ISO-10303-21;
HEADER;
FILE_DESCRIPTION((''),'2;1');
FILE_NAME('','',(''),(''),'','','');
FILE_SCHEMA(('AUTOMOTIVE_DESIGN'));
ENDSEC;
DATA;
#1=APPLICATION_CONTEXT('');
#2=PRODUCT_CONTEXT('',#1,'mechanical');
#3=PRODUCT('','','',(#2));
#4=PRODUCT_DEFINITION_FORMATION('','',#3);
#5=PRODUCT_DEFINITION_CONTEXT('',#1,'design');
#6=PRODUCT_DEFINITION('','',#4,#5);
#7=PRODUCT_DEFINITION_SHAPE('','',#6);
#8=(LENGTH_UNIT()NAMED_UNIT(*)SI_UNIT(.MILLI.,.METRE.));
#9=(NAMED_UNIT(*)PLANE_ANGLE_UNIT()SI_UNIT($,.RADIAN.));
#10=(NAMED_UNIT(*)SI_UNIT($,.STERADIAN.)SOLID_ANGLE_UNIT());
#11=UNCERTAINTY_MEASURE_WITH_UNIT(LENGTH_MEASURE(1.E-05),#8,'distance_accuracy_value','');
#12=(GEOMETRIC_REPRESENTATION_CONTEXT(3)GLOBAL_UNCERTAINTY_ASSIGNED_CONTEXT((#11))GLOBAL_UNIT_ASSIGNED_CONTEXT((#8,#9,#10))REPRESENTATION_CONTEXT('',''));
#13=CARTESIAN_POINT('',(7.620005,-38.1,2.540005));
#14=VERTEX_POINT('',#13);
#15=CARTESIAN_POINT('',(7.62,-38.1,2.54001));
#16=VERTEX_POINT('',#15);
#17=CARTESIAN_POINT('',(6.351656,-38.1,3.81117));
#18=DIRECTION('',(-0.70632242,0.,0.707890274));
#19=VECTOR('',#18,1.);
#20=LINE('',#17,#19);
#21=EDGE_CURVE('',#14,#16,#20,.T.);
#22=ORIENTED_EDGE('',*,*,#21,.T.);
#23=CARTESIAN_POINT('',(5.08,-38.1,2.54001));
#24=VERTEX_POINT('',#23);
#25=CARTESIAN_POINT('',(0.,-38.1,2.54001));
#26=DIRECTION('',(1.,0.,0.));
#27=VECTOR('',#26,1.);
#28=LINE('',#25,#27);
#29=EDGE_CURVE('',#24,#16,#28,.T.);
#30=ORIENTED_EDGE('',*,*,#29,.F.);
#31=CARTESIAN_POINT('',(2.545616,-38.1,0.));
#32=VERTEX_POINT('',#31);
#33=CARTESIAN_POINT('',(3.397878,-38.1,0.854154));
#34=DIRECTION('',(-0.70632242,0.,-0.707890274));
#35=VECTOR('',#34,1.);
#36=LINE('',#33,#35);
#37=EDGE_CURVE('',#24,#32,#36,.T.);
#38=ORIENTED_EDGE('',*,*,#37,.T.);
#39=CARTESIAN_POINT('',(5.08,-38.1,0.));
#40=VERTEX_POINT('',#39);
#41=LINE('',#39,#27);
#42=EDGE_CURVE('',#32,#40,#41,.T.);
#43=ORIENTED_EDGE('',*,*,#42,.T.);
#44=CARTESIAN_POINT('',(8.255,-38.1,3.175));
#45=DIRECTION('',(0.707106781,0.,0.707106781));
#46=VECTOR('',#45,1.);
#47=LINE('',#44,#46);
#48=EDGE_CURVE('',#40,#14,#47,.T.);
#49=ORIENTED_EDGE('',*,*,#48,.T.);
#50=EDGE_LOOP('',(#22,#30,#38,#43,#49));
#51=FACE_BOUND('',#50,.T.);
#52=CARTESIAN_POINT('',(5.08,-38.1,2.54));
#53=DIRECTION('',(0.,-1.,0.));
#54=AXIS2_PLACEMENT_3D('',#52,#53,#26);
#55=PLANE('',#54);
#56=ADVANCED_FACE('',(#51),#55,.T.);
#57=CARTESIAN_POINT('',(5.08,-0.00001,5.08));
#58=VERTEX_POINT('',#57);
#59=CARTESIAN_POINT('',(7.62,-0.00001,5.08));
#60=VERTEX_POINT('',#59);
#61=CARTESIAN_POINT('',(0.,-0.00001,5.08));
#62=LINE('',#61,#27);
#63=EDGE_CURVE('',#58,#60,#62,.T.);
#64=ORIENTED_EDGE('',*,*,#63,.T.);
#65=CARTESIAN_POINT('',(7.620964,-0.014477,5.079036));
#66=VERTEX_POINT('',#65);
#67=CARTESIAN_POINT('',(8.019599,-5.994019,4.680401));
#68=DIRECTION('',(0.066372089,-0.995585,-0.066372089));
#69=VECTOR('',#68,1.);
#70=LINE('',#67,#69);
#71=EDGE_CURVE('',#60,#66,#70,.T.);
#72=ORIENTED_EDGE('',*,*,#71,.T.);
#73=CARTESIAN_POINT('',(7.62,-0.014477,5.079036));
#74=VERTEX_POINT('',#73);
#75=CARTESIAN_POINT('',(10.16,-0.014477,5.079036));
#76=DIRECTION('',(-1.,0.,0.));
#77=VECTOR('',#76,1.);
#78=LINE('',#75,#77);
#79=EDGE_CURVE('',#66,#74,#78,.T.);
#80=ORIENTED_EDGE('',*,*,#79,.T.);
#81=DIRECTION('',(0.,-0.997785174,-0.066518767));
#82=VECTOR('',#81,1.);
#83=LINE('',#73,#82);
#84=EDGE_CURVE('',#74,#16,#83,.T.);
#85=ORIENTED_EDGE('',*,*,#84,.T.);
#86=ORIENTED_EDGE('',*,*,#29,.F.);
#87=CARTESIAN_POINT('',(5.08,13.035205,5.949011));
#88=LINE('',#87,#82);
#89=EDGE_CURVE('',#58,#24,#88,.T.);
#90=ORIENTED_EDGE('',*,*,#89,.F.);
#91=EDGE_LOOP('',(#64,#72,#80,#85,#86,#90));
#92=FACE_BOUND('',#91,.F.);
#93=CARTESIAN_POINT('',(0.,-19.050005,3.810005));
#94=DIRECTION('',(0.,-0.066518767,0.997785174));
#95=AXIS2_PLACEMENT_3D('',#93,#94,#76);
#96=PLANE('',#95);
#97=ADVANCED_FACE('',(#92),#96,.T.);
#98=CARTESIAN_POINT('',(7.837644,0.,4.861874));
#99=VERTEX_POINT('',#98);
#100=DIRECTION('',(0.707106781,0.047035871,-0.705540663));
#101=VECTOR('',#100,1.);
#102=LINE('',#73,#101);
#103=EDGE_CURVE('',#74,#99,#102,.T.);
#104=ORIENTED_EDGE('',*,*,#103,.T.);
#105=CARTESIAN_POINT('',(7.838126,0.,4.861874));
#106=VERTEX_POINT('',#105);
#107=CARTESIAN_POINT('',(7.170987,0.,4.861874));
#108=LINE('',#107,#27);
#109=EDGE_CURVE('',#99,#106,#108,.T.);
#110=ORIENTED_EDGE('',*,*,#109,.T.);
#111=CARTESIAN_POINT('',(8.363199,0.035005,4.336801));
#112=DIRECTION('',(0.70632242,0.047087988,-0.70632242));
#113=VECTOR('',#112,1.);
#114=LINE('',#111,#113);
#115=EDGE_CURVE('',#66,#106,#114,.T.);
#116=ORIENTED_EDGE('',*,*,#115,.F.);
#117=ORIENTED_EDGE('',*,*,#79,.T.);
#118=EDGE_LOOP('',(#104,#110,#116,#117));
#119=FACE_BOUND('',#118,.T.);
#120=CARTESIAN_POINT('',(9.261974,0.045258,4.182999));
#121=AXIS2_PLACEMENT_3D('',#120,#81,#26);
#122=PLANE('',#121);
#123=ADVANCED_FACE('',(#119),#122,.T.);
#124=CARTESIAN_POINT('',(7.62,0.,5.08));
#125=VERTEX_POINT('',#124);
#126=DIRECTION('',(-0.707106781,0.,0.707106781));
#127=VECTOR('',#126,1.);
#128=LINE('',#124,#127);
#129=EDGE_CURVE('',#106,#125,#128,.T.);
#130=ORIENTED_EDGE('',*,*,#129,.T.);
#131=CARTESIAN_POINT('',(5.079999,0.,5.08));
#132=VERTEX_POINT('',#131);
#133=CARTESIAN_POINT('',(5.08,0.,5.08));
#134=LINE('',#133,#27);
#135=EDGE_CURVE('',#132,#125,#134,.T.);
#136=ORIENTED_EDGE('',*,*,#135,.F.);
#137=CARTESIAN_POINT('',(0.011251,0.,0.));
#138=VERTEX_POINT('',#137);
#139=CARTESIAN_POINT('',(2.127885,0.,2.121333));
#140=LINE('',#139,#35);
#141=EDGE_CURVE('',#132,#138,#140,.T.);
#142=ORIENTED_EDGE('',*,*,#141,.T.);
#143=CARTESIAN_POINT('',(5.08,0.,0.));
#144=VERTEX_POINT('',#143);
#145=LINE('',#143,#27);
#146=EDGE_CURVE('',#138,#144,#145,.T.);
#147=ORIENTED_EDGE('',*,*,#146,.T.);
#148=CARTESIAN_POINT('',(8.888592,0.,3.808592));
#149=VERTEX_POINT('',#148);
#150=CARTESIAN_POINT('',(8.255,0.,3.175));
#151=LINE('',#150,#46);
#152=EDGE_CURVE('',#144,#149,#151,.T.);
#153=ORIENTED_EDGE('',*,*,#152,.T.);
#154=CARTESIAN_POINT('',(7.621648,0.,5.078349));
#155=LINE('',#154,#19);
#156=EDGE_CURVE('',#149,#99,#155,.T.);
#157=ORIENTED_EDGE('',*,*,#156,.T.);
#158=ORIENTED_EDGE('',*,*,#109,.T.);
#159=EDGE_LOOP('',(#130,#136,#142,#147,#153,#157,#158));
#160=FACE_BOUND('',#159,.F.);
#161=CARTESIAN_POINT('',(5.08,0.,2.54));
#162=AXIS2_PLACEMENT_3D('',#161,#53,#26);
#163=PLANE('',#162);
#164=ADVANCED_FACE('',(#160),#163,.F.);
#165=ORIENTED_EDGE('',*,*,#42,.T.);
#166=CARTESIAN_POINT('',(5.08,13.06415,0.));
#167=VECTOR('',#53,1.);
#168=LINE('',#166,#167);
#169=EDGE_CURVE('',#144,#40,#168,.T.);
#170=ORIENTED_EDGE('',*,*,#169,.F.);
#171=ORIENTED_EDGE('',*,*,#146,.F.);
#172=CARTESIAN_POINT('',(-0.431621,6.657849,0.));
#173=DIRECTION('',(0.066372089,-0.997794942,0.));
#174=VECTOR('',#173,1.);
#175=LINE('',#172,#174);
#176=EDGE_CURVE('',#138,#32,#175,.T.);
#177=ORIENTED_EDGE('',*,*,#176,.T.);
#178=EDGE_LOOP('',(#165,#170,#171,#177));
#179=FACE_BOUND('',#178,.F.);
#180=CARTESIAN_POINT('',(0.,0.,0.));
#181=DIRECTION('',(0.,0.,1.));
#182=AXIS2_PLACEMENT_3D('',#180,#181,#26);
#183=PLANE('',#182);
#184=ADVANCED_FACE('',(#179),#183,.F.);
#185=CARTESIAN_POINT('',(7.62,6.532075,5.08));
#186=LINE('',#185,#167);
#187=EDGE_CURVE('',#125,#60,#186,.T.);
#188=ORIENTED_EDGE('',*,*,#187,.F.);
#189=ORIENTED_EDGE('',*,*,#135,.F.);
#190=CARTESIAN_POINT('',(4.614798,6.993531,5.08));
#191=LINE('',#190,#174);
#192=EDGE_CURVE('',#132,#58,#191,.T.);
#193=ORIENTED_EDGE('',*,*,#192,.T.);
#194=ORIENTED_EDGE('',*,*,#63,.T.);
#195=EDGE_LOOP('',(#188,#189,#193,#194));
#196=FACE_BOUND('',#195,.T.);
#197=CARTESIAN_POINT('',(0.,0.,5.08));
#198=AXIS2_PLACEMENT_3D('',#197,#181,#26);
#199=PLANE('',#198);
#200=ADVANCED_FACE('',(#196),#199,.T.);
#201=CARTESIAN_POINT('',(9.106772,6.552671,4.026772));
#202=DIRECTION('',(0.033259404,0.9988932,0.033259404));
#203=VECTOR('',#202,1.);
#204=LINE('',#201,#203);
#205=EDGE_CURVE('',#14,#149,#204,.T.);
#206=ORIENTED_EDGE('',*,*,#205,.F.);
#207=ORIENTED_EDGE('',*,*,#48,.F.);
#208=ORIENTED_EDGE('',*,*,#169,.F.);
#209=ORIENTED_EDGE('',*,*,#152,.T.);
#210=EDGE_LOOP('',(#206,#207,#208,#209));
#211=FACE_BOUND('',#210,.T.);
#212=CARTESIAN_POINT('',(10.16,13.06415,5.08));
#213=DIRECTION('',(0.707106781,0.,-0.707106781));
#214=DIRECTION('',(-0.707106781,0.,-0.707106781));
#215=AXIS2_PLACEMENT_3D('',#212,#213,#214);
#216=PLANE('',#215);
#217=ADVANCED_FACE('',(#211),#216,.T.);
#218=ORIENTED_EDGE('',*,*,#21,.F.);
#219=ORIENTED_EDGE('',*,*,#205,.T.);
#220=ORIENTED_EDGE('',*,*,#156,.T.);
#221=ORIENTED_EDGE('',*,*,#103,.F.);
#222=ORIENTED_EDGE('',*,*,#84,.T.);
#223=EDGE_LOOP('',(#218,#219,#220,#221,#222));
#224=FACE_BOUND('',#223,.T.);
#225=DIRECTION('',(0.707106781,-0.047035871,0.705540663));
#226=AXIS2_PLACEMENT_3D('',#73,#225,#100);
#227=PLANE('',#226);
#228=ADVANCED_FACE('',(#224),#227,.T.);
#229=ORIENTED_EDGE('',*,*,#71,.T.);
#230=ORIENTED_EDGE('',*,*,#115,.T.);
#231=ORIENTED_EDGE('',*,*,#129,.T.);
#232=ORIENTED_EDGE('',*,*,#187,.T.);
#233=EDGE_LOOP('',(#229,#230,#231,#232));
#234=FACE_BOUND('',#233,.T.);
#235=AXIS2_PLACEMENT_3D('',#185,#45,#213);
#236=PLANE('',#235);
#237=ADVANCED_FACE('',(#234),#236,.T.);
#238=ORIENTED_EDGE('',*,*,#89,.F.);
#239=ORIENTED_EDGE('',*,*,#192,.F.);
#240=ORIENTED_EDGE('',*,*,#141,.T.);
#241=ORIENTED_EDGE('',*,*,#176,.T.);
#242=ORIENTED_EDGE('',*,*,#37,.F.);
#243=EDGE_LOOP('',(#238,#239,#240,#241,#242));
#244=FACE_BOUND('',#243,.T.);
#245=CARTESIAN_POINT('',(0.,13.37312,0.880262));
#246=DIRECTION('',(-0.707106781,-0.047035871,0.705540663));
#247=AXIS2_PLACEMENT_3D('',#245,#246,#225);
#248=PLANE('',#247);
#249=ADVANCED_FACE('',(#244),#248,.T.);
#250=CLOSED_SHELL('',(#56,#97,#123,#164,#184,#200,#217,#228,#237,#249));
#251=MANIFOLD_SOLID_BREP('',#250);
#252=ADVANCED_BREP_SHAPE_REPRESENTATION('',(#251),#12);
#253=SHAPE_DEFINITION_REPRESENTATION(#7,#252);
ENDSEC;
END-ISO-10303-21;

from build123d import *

# Parameters (mm, degrees)
F0_W        = 10.16
F0_H        = 5.08
F1_DEPTH    = 38.1
F2_SIZE2    = 2.53999
F2_SIZE     = 38.09999
F3_T1_DEPTH = 64.3128613158
F4_T1_DEPTH = 13.0641595789
F4_T3_DEPTH = 44.702137425
F5_T1_DEPTH = 64.1438766671


# Not quite as in the source:
# - a fillet or chamfer that OpenCascade refuses, or shapes differently, is made with other operations: its cross-section is extruded or revolved along the edge and cut away or added
# - a fillet or chamfer is up to 0.001 mm smaller than in the source, because OpenCascade refuses the exact size


with BuildPart() as f1:
    # F0 (on Front) → F1 (new body)
    with BuildSketch(Plane.XZ):
        with Locations((5.08, 2.54)):
            Rectangle(F0_W, F0_H)
    extrude(amount=F1_DEPTH)

    # F2 (size 38.1 and 2.54 in the source; OpenCascade refuses exactly that, so slightly less here)
    f2_edges = [f1.edges().sort_by_distance(p)[0] for p in [
        (5.08, -38.1, 5.08),
    ]]
    f2_side = f1.faces().sort_by_distance((5.08, -19.05, 5.08))[0]
    chamfer(f2_edges, length=F2_SIZE, length2=F2_SIZE2, reference=f2_side)

    # F3: chamfer of 5.08 on 1 edges, made by hand

    # F3_s2 → F3_t1 (cut)
    with BuildSketch(Plane(origin=(0, 13.3723717196, 0.8914881722), x_dir=(1, 0, 0), z_dir=(0, -0.9977851741, -0.0665187672))):
        Polygon((0, -0.0112506505), (5.08, 5.0687493495), (0, 5.0687493495), align=None)
    extrude(amount=F3_T1_DEPTH, mode=Mode.SUBTRACT)

    # F4: chamfer of 2.54 on 2 edges, made by hand

    # F4_s2 → F4_t1 (cut)
    with BuildSketch(Plane.XZ.offset(-6.5320747894)):
        Polygon((7.62, 5.08), (10.16, 2.54), (10.16, 5.08), align=None)
    extrude(amount=F4_T1_DEPTH, mode=Mode.SUBTRACT)

    # F4_s4 → F4_t3 (cut)
    with BuildSketch(Plane(origin=(0, 0.3226895493, 0.0215125576), x_dir=(1, 0, 0), z_dir=(0, -0.9977851741, -0.0665187672))):
        Polygon((7.62, 5.0687493495), (10.16, 2.5287493495), (10.16, 5.0687493495), align=None)
    extrude(amount=F4_T3_DEPTH, mode=Mode.SUBTRACT)

    # F5: chamfer of 5.08 on 1 edges, made by hand

    # F5_s2 → F5_t1 (cut)
    with BuildSketch(Plane.XZ.offset(-13.0641495789)):
        Polygon((10.16, 5.08), (5.08, 0), (10.16, 0), align=None)
    extrude(amount=F5_T1_DEPTH, mode=Mode.SUBTRACT)


solid = f1.part
